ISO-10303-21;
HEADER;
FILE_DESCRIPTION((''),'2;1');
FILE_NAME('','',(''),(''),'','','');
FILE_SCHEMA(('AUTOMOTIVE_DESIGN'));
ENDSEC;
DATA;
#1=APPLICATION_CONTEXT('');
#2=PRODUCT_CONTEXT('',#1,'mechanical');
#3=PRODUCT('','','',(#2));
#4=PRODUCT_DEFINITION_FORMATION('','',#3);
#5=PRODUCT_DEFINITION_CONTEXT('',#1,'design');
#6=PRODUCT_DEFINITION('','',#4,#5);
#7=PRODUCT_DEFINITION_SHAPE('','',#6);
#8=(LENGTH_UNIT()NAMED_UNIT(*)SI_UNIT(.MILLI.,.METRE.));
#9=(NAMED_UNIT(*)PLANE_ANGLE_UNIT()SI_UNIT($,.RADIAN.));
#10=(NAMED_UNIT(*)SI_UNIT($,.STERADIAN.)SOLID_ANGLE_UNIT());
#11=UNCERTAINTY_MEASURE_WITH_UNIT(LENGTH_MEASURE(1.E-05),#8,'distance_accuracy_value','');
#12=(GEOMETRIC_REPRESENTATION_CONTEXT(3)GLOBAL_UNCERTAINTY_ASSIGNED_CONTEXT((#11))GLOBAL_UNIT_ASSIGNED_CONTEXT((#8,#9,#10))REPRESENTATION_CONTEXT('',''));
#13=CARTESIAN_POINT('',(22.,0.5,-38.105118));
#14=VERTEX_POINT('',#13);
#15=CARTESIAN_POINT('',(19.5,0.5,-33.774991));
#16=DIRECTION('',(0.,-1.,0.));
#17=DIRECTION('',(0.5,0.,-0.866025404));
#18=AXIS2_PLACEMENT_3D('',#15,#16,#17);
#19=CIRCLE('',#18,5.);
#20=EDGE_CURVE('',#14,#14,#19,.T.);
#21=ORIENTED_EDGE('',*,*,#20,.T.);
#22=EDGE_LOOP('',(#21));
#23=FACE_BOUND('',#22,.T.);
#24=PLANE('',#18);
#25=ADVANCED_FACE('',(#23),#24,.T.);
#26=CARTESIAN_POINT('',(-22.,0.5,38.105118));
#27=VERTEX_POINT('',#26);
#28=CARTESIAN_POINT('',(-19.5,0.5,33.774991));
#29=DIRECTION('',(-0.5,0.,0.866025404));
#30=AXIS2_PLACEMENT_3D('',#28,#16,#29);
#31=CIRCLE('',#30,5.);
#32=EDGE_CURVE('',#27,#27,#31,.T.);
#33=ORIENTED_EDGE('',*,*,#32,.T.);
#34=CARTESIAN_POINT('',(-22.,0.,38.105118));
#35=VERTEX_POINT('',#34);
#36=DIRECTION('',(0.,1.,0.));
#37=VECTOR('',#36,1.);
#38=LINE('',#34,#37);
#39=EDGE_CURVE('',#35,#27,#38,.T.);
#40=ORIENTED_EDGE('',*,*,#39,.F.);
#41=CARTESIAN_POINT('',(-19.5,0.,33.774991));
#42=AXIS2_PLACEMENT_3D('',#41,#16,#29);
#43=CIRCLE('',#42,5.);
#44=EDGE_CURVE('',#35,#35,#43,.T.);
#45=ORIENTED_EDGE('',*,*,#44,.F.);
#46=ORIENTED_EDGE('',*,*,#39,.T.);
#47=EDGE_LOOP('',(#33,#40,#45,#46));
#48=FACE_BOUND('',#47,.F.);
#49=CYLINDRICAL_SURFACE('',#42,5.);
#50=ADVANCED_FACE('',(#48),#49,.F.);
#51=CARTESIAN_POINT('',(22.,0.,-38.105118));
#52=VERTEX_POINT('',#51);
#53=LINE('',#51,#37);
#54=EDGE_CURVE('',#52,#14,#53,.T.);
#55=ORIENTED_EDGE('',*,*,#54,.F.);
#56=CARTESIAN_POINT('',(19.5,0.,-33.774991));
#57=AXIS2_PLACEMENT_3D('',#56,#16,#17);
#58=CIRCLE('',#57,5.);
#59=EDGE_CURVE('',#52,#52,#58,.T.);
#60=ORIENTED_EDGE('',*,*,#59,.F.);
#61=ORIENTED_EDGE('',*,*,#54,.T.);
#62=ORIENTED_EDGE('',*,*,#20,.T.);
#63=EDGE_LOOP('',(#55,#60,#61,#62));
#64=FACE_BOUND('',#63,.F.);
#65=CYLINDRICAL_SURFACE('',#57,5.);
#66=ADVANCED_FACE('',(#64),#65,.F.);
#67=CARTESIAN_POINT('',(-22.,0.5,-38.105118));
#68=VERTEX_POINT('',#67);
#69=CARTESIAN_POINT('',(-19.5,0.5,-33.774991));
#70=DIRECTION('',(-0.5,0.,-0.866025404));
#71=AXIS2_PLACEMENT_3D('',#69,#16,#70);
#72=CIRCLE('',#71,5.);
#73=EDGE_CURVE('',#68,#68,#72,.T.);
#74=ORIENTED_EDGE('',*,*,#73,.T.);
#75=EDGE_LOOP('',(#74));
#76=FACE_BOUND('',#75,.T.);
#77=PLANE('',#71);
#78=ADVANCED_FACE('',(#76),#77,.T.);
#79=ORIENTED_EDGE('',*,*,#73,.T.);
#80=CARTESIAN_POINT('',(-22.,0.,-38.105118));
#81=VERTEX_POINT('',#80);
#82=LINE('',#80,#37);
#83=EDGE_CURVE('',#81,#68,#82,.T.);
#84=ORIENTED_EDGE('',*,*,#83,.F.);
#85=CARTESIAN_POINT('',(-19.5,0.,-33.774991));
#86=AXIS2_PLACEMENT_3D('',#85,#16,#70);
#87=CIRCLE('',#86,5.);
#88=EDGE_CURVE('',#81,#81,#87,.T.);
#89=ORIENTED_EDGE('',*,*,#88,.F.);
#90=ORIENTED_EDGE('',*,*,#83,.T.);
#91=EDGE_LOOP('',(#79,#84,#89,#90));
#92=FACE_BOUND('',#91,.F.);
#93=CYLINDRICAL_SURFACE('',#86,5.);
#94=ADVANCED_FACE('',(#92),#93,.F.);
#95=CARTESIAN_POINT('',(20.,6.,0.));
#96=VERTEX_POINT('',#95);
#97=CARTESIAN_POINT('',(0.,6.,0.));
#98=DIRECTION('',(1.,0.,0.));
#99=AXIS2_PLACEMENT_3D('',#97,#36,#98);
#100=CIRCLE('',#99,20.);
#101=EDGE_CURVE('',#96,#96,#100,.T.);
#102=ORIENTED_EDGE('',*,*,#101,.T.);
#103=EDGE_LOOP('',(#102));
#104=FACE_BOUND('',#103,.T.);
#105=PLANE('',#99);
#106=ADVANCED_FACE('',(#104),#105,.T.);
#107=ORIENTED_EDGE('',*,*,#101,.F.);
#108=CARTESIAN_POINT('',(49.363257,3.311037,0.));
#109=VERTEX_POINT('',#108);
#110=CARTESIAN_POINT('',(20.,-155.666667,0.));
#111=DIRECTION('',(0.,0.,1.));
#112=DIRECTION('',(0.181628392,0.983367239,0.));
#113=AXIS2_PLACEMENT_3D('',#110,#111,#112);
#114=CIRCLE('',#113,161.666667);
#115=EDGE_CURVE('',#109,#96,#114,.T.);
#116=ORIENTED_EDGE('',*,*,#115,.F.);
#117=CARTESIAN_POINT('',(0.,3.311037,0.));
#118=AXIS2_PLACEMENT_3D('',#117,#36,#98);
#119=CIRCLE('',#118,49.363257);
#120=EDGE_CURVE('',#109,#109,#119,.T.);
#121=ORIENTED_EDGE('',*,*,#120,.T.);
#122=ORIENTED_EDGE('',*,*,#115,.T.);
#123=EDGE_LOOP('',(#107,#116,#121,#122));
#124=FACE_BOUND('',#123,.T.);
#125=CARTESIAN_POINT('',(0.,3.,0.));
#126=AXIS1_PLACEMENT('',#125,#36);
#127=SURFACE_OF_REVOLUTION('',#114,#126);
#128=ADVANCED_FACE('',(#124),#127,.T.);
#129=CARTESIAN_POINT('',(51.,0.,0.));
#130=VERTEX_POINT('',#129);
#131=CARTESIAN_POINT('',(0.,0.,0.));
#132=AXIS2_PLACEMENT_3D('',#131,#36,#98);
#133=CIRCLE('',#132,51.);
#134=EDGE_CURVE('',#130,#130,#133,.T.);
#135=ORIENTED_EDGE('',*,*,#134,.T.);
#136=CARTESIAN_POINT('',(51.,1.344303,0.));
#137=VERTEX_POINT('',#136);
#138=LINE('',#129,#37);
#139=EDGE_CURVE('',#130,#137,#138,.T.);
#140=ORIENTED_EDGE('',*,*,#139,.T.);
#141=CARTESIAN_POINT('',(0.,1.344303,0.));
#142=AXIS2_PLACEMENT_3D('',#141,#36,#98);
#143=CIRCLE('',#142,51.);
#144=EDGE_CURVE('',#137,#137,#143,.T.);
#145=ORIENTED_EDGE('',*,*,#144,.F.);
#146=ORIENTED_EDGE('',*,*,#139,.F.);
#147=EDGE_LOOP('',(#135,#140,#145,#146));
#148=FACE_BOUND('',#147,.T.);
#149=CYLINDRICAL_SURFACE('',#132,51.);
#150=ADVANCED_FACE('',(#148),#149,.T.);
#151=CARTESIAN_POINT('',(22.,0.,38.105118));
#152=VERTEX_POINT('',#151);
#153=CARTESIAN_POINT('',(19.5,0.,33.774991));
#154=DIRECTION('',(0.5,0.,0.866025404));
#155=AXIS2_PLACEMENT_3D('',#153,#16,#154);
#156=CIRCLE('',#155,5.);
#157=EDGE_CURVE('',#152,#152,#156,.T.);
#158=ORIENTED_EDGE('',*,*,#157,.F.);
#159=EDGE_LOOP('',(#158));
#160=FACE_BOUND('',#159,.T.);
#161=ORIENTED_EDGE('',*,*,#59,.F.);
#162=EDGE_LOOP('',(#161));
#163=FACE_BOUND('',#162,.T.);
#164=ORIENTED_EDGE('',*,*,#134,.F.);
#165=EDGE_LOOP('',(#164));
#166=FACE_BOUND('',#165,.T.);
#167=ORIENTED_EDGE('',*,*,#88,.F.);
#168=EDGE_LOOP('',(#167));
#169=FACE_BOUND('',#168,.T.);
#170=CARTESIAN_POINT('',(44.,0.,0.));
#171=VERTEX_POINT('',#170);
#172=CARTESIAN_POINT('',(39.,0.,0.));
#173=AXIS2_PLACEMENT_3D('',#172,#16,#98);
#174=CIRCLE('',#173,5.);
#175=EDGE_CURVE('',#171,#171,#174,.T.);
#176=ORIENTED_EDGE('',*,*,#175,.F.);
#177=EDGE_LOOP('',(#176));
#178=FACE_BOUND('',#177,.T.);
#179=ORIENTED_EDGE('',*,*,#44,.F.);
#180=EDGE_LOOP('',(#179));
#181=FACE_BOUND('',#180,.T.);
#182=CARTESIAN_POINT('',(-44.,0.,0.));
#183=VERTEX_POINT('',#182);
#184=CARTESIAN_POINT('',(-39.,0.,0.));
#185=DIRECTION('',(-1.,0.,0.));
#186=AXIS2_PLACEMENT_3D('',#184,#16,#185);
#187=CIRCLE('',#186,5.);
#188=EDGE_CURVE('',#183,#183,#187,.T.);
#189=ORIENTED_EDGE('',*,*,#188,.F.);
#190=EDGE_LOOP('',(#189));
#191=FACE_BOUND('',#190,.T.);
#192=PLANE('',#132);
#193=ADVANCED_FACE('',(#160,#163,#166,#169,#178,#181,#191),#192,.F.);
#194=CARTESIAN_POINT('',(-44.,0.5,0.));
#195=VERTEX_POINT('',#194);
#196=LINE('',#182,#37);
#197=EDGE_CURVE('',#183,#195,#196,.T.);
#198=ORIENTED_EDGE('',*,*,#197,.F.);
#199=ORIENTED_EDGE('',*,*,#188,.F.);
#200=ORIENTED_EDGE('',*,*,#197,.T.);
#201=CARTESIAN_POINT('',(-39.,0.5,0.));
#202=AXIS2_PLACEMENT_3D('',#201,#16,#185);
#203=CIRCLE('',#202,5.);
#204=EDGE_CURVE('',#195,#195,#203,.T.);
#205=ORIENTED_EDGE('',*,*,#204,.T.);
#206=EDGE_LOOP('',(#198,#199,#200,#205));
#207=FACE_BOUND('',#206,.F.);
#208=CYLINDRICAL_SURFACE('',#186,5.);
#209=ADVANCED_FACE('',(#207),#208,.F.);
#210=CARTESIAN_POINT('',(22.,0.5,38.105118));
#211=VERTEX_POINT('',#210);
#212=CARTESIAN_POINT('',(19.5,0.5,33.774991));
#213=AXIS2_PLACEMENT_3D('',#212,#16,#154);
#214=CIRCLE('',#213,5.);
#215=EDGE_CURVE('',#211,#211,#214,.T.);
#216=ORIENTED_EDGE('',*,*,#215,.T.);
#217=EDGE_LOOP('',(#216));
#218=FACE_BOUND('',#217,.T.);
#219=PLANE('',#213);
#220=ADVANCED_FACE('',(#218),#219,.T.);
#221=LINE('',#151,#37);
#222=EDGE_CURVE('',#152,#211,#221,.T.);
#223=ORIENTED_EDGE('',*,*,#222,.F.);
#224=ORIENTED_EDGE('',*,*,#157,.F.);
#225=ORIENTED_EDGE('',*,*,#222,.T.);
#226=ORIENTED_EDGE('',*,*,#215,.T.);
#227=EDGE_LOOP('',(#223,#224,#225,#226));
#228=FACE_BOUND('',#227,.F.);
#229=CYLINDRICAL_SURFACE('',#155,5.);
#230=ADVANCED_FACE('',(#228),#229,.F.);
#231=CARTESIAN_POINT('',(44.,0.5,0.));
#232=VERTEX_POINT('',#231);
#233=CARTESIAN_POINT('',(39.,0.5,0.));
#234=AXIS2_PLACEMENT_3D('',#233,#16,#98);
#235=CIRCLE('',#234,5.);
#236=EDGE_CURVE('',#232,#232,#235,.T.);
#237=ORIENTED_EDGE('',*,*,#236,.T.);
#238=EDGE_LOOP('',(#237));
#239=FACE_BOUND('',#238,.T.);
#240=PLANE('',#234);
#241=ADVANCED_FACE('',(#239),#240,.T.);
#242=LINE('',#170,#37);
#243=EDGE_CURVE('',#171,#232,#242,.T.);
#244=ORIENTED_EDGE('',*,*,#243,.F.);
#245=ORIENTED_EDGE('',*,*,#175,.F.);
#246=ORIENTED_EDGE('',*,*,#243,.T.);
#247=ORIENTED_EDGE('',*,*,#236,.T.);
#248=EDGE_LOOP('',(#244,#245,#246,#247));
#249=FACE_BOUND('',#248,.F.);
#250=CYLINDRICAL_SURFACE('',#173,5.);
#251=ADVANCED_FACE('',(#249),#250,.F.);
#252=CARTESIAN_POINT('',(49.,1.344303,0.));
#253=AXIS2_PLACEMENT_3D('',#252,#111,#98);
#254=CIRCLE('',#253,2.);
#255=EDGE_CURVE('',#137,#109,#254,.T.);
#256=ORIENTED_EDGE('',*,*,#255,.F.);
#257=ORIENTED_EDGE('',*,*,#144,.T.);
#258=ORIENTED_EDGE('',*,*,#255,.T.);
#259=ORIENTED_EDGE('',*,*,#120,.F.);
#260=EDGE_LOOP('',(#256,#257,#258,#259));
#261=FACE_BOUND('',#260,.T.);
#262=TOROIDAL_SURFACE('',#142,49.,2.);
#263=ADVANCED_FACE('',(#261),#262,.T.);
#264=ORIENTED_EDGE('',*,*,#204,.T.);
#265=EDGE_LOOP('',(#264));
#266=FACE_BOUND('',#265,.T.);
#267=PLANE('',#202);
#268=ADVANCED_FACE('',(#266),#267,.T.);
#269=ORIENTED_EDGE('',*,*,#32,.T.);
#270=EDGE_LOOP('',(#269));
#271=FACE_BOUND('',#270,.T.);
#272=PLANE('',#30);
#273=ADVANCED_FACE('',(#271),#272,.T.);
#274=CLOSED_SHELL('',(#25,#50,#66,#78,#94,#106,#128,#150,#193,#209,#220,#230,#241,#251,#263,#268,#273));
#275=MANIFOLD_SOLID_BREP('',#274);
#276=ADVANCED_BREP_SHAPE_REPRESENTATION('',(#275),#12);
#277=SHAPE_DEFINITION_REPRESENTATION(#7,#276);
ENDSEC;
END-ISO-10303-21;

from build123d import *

# Parameters (mm, degrees)
F2_R            = 5
F3_DEPTH        = 0.5
F3_COPIES_COUNT = 6


# Not quite as in the source:
# - a pattern or mirror of a feature is missing from the dataset's text; its kind, count and spacing are read off the source's solid


with BuildPart() as f1:
    # F0 (on Top) → F1 (revolve)
    with BuildSketch(Plane.XY):
        with BuildLine():
            Line((0, 6), (0, 0))
            Line((0, 0), (51, 0))
            Line((51, 0), (51, 1.3443025184))
            ThreePointArc((51, 1.3443025184), (50.5372887774, 2.6236551731), (49.363256785, 3.3110369967))
            ThreePointArc((49.363256785, 3.3110369967), (34.7430608343, 5.3263557546), (20, 6))
            Line((20, 6), (0, 6))
        make_face()
    revolve(axis=Axis((0, 3, 0), (0, 1, 0)))

    # F2 (on face) → F3 (cut)
    with BuildSketch(Plane.XZ):
        with Locations((39, 0)):
            Circle(F2_R)
    f3 = extrude(amount=-F3_DEPTH, mode=Mode.SUBTRACT)

    # F3_copies: F3 ×6 about axis
    f3_copies_axis = Axis((0, 0, 0), (0, 1, 0))
    for i in range(1, F3_COPIES_COUNT):
        add(f3.rotate(f3_copies_axis, i * 360 / F3_COPIES_COUNT), mode=Mode.SUBTRACT)


solid = f1.part
